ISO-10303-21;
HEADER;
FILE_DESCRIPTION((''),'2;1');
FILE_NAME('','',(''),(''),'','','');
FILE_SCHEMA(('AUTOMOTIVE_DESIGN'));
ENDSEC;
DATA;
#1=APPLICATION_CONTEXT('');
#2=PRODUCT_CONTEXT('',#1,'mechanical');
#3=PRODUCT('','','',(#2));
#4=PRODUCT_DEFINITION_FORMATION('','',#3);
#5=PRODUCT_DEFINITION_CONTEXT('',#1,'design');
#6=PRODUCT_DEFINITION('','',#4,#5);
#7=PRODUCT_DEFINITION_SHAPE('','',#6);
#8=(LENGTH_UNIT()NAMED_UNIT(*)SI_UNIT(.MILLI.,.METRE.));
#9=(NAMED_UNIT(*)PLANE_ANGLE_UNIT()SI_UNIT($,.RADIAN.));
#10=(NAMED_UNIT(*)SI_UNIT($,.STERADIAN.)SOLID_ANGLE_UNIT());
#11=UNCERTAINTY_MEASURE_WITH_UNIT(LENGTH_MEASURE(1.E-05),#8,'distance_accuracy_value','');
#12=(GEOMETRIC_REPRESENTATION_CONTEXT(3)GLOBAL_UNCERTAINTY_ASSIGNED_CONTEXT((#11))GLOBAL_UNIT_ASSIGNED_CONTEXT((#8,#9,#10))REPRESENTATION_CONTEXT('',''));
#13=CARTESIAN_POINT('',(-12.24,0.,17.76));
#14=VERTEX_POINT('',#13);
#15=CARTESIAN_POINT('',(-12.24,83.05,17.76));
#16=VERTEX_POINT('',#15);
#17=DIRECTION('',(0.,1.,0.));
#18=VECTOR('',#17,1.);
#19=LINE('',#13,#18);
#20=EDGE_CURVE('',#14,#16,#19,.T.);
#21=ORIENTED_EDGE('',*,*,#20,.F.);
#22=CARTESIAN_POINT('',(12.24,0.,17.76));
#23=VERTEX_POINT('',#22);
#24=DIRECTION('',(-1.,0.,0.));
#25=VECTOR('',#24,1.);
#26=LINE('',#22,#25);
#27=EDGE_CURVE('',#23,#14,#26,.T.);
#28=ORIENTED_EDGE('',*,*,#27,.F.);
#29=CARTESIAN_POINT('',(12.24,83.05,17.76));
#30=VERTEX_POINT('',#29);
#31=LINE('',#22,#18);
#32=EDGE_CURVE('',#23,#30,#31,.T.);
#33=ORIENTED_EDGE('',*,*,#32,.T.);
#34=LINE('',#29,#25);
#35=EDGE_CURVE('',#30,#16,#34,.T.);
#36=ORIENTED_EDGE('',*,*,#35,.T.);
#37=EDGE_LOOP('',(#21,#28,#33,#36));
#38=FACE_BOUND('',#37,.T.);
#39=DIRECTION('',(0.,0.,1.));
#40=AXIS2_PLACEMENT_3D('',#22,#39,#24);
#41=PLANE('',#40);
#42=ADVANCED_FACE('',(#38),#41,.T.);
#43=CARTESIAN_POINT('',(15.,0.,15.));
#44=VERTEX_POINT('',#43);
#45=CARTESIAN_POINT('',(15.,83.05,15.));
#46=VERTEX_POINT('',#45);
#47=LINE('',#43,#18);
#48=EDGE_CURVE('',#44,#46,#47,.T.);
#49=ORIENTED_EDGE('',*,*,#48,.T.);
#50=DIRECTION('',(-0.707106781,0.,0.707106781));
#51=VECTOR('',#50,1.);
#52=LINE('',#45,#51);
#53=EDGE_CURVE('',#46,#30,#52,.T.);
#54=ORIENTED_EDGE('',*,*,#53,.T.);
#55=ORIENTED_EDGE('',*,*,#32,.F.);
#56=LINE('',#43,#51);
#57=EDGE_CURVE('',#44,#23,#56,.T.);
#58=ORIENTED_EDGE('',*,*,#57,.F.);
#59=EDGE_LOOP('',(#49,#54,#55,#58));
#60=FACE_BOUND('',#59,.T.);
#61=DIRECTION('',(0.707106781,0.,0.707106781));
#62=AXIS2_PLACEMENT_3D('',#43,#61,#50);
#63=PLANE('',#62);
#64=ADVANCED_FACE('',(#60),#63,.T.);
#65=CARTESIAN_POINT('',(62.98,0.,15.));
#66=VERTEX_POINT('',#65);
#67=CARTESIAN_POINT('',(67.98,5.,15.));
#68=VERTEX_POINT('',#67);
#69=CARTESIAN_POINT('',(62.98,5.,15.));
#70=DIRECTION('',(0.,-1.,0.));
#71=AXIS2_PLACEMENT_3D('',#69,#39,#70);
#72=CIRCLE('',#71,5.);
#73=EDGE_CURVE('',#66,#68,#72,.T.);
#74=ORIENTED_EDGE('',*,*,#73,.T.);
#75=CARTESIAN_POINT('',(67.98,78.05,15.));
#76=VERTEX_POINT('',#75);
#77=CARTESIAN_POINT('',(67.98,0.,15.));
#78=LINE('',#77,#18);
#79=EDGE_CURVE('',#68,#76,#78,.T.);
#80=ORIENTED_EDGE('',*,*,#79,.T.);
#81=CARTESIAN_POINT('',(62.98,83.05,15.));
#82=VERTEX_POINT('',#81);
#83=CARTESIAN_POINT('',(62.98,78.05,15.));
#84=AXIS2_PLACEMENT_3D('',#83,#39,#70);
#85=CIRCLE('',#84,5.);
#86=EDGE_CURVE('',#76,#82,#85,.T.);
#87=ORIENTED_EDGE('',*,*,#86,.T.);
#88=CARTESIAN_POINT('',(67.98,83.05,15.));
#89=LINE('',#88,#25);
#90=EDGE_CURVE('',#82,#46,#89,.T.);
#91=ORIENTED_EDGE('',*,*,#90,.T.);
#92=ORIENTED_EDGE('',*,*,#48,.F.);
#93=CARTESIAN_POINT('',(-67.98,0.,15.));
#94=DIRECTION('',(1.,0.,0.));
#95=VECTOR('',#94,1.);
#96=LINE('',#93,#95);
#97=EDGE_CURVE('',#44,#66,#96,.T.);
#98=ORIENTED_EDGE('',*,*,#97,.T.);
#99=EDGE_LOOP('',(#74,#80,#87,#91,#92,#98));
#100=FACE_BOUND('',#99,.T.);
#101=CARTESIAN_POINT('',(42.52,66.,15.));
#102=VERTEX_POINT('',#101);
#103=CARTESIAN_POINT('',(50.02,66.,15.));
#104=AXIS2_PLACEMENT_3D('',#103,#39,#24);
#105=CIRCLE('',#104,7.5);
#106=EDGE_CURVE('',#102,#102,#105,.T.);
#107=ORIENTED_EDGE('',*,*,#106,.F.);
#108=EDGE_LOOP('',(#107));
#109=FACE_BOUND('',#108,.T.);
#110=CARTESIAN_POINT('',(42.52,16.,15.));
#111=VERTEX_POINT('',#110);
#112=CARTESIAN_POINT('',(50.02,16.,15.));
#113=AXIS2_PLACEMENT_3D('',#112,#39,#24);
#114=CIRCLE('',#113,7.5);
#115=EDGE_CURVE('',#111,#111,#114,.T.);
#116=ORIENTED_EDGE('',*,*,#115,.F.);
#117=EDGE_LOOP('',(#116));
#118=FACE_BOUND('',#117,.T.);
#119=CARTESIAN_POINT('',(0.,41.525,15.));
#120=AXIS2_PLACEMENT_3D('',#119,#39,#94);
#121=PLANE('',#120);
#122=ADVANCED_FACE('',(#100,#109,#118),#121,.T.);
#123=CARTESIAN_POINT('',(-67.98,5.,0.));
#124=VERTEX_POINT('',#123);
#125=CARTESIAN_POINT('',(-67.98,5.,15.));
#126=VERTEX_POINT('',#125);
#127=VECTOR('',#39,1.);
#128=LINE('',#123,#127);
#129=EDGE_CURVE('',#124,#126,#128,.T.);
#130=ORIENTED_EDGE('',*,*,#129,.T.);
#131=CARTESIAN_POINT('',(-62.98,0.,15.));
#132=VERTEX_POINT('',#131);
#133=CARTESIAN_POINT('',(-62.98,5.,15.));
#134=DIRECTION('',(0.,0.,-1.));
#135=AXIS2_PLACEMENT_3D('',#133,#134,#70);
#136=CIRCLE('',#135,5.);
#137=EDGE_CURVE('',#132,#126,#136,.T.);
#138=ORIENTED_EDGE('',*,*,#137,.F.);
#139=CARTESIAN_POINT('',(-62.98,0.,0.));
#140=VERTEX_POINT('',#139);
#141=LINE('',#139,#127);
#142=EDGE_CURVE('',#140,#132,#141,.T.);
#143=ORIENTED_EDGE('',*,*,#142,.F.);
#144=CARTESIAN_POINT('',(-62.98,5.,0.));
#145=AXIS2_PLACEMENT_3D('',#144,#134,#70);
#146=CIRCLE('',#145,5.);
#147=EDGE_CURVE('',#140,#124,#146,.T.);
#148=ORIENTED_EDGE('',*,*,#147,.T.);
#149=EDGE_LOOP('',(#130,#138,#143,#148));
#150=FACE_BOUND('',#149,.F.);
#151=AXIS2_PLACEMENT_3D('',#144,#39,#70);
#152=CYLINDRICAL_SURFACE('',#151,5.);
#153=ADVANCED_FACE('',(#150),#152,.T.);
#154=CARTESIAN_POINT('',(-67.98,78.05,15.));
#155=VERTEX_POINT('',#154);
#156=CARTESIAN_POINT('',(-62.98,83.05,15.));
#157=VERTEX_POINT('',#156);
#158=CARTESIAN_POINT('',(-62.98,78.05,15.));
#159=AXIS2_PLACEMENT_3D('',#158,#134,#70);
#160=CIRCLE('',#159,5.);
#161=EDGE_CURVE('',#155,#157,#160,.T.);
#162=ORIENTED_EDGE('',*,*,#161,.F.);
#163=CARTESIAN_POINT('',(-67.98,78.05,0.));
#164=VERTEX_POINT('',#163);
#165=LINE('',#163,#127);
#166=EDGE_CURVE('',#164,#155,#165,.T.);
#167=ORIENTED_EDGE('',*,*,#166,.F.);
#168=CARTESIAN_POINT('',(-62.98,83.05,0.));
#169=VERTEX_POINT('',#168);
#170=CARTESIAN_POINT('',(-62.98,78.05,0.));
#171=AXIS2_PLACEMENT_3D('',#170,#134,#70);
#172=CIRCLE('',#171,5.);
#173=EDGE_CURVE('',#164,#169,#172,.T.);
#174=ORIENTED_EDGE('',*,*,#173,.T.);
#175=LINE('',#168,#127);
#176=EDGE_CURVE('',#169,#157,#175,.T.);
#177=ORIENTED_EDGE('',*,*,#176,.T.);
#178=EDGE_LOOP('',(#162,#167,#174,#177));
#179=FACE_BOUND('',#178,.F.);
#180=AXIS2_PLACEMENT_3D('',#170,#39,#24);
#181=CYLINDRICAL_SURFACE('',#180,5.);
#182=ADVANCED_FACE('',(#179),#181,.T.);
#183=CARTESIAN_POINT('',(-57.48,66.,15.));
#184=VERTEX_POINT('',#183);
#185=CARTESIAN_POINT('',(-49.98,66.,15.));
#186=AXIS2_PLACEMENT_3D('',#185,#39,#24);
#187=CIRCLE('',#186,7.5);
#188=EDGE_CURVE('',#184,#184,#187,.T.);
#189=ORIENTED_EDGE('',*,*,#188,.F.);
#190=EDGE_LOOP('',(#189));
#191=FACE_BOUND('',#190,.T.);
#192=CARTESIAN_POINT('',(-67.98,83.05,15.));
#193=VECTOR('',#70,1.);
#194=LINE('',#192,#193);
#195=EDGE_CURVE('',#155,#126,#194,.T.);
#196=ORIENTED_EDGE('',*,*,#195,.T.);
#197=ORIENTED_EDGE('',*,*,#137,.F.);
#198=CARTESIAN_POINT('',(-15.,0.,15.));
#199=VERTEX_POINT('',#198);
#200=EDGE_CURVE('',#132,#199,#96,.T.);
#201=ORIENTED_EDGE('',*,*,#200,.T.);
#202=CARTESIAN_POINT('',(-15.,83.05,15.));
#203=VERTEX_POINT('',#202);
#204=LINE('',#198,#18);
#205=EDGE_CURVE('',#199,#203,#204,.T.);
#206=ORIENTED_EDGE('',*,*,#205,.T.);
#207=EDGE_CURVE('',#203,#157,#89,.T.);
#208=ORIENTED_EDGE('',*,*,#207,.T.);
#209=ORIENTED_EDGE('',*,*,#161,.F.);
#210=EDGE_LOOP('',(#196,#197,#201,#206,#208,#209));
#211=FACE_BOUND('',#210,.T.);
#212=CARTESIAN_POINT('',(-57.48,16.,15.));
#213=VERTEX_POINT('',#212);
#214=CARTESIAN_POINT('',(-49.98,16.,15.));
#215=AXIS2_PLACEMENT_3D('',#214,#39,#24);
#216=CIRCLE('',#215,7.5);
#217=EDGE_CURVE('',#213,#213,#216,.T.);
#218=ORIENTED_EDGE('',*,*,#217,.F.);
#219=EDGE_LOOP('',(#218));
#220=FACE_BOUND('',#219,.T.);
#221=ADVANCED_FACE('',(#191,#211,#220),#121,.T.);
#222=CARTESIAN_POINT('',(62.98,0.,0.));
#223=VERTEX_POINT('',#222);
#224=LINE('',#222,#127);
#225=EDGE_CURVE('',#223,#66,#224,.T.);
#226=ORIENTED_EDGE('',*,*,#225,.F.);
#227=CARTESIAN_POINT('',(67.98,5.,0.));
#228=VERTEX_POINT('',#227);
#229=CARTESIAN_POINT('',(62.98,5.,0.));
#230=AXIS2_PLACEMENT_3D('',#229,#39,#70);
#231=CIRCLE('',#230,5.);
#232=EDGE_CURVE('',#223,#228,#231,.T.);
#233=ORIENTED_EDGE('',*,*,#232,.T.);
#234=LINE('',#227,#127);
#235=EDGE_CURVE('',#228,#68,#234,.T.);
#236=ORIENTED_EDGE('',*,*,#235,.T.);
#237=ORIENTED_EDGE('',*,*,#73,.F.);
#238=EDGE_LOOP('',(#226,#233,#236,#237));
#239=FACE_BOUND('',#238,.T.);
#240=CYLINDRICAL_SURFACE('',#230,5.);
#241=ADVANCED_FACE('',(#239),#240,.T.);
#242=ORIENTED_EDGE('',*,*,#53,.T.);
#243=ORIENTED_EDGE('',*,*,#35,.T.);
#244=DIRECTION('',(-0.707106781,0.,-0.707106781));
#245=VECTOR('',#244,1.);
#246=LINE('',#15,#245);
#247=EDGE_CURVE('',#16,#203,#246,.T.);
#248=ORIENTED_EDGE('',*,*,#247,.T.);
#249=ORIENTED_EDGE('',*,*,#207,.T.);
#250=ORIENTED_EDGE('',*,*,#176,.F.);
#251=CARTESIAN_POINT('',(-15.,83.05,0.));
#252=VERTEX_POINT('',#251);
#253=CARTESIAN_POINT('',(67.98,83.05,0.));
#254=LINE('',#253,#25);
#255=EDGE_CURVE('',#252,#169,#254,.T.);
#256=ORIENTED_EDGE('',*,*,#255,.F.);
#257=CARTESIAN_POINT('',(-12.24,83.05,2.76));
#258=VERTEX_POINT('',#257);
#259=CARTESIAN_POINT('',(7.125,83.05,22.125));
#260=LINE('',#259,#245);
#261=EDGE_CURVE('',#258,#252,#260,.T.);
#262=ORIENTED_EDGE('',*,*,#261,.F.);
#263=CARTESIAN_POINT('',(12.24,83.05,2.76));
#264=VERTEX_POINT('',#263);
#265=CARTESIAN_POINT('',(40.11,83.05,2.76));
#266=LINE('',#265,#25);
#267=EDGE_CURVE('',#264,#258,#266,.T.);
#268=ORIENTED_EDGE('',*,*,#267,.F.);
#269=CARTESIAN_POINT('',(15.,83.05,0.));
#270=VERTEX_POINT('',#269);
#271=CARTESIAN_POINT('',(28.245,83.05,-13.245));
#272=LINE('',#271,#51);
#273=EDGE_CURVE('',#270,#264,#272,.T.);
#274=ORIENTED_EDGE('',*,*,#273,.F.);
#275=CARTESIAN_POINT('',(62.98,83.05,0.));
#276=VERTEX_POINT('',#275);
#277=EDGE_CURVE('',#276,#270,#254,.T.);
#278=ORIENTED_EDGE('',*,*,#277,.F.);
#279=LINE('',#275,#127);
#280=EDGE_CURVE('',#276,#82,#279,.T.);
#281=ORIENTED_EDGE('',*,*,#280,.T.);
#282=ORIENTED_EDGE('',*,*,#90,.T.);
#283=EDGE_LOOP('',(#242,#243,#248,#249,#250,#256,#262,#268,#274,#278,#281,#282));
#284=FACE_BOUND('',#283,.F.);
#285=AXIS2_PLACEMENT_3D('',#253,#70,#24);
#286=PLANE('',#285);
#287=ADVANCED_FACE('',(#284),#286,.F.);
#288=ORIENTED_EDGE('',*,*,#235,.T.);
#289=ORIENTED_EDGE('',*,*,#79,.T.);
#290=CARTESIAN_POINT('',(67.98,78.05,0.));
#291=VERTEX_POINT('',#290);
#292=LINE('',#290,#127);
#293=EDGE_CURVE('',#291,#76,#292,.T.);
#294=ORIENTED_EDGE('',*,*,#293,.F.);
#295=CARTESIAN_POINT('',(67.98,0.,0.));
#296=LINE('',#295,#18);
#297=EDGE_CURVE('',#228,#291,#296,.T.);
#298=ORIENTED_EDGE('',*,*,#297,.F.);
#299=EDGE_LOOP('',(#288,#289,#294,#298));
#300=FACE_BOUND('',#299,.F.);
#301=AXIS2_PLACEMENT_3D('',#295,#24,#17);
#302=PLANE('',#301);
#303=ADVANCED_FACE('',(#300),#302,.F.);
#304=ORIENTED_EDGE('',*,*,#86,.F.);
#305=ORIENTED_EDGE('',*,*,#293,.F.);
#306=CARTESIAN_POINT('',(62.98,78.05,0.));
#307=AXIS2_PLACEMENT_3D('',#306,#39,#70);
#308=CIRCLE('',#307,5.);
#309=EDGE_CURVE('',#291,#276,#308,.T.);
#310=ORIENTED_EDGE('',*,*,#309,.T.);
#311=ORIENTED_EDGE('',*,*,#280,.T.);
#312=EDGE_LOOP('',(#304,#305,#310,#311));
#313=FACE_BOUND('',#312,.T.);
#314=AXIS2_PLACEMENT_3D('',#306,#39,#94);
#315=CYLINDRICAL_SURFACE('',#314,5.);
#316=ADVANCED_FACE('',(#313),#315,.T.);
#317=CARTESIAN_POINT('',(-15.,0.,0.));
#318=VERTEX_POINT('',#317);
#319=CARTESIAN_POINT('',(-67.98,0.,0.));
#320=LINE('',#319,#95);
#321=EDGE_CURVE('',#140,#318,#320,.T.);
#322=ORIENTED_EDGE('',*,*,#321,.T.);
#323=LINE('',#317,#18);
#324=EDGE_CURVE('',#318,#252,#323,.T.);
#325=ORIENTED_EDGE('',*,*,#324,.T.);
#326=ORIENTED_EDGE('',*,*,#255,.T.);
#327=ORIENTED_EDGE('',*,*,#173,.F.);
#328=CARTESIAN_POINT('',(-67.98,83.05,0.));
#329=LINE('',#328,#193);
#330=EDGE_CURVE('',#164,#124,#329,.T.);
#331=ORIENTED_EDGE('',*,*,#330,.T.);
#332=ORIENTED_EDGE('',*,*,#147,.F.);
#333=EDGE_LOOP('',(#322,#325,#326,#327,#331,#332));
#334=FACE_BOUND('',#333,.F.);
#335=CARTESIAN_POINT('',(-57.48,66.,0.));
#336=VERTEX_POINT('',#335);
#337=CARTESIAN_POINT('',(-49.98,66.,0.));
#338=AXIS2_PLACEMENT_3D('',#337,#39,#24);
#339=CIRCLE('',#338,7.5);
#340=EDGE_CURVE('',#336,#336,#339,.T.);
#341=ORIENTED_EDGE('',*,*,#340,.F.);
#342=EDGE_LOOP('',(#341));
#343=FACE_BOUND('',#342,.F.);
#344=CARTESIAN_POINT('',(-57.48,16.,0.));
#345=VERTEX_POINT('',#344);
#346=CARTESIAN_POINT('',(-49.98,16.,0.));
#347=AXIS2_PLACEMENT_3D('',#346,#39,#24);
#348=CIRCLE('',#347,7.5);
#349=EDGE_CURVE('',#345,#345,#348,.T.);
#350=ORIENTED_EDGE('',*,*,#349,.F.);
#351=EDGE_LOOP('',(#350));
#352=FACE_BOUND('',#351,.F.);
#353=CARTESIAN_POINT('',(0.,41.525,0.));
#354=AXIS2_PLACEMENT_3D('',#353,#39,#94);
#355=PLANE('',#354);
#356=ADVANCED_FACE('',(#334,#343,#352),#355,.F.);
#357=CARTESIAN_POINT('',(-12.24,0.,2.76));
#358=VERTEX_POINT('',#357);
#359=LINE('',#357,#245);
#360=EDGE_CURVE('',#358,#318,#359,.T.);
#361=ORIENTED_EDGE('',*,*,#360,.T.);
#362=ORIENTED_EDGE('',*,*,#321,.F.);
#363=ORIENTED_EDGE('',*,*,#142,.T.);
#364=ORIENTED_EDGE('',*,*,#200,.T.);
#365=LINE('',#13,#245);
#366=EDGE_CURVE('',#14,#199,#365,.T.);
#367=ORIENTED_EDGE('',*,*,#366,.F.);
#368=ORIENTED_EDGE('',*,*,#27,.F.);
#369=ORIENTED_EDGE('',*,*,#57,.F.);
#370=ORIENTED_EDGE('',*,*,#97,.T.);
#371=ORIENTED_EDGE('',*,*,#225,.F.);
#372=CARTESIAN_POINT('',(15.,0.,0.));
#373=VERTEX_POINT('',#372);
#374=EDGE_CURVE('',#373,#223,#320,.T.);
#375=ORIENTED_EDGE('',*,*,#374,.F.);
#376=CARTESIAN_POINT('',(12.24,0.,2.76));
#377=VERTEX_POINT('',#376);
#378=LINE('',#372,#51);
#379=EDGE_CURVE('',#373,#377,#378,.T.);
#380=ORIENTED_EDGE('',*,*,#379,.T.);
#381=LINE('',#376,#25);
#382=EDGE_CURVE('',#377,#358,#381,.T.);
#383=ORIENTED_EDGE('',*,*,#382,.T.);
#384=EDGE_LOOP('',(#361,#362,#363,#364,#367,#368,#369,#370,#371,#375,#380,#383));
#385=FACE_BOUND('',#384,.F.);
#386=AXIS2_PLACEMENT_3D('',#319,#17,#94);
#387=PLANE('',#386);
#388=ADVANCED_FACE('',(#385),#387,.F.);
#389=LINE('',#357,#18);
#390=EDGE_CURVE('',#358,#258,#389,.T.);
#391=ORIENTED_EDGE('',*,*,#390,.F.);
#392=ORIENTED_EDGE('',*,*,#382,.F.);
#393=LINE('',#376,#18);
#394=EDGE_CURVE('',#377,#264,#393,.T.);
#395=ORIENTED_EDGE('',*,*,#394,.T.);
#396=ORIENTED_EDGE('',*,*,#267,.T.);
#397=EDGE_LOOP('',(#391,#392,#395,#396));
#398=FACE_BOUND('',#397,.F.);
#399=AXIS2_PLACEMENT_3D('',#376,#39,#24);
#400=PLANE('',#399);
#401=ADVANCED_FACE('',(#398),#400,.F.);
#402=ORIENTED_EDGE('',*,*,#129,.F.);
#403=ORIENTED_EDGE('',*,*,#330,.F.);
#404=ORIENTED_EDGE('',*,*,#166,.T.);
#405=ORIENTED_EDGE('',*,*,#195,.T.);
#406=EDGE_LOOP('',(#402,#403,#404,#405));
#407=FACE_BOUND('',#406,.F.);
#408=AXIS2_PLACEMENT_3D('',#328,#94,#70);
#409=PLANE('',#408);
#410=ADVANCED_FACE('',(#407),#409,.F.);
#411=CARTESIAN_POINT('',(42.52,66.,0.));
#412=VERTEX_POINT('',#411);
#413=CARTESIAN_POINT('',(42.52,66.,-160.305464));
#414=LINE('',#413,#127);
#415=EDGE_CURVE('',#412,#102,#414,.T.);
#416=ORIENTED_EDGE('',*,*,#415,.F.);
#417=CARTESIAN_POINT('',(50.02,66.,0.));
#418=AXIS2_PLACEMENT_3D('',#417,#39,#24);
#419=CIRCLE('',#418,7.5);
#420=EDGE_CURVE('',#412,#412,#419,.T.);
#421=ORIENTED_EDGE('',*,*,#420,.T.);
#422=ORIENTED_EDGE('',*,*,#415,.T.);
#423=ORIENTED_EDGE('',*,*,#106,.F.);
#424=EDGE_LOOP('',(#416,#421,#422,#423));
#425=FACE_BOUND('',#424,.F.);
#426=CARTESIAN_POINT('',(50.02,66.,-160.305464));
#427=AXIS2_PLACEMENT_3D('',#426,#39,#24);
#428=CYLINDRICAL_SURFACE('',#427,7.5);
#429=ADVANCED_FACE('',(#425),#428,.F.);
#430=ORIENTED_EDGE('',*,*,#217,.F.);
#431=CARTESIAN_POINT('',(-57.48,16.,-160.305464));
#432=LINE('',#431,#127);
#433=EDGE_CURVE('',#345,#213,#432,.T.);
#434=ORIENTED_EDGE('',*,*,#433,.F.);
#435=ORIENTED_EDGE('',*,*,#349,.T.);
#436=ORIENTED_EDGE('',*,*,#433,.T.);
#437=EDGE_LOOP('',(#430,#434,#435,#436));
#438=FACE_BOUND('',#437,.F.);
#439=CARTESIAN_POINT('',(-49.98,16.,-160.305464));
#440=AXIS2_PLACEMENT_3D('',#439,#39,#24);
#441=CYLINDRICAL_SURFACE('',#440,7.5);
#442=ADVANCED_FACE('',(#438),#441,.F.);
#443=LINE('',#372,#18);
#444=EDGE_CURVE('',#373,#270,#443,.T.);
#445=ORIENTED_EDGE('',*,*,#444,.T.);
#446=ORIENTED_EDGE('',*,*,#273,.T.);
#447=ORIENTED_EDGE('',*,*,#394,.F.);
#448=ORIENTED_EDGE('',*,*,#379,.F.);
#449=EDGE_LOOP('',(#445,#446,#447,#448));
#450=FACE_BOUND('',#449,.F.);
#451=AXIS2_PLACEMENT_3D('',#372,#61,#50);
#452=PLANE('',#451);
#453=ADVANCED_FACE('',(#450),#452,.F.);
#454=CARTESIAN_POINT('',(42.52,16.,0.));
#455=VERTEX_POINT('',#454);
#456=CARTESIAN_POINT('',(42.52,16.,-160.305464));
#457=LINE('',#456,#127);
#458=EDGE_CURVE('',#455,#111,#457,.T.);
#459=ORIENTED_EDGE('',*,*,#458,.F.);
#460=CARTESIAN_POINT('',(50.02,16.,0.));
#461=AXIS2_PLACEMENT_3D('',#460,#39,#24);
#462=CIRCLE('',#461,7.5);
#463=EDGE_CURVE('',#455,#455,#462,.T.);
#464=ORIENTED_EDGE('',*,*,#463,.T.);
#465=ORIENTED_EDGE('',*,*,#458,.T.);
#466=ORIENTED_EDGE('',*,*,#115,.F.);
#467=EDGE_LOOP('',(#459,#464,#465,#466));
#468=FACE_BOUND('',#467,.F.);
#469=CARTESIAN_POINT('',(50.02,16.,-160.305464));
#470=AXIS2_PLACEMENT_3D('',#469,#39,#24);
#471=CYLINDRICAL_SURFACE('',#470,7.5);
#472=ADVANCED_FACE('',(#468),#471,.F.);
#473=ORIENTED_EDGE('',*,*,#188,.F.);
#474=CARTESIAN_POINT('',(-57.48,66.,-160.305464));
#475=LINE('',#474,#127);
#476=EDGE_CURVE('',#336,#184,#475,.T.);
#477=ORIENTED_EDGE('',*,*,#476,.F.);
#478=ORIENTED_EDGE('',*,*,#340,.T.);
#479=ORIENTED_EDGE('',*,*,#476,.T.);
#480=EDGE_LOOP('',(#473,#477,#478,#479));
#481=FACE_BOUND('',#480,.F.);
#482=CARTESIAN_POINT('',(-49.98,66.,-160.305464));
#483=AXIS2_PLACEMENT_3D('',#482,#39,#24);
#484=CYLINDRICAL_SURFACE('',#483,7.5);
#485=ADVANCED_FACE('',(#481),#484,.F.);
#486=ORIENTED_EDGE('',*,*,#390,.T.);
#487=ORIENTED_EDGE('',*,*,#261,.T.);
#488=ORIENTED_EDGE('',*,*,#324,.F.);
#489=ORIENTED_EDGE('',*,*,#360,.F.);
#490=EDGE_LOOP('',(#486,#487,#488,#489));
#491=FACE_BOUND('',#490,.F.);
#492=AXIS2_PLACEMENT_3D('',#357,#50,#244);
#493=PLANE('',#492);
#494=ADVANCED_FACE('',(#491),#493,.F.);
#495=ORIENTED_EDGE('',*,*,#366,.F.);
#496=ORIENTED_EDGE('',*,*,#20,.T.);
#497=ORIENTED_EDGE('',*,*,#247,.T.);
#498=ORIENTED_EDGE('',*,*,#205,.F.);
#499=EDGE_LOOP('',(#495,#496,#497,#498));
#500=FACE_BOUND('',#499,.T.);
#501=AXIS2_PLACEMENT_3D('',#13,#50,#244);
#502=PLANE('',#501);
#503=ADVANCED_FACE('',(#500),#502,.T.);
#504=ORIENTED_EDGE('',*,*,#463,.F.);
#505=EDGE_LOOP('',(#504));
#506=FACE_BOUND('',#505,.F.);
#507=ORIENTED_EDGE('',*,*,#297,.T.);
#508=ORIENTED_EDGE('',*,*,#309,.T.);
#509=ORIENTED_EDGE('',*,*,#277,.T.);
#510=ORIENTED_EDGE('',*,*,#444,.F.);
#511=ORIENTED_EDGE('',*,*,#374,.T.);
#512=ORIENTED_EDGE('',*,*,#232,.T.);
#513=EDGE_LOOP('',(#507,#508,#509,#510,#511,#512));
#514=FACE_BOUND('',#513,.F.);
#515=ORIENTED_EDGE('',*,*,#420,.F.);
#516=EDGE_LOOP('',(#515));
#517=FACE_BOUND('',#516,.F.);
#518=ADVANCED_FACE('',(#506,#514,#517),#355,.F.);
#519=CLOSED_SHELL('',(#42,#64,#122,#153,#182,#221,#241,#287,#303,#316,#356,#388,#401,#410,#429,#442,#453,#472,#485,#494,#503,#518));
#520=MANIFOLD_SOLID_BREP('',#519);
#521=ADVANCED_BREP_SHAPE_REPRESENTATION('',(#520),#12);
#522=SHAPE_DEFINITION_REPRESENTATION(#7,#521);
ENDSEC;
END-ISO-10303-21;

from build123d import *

# Parameters (mm, degrees)
F1_DEPTH = 15
F4_DEPTH = 83.051
F7_DEPTH = 83.05
F8_R     = 5
F10_D    = 15


with BuildPart() as f1:
    # F0 (on Top) → F1 (new body)
    with BuildSketch(Plane.XY):
        Polygon((-67.98, 0), (0, 0), (67.98, 0), (67.98, 83.05), (-67.98, 83.05), align=None)
    extrude(amount=F1_DEPTH)

    # F3 (on offset) → F4 (cut, through all)
    with BuildSketch(Plane.XZ):
        Polygon((-15, 0), (0, 0), (15, 0), (12.24, 2.76), (-12.24, 2.76), align=None)
    extrude(amount=-F4_DEPTH, mode=Mode.SUBTRACT)

    # F6 (on offset) → F7 (join)
    with BuildSketch(Plane.XZ):
        Polygon((-15, 15), (0, 15), (15, 15), (12.24, 17.76), (-12.24, 17.76), align=None)
    extrude(amount=-F7_DEPTH)

    # F8
    f8_edges = [f1.edges().sort_by_distance(p)[0] for p in [
        (-67.98, 0, 7.5),
        (67.98, 0, 7.5),
        (67.98, 83.05, 7.5),
        (-67.98, 83.05, 7.5),
    ]]
    fillet(f8_edges, radius=F8_R)

    # F10 (through all)
    with Locations(Plane(origin=(0, 0, 0), x_dir=(1, 0, 0), z_dir=(0, 0, -1))):
        with Locations((-49.98, -66), (-49.98, -16), (50.02, -66), (50.02, -16)):
            Hole(F10_D / 2)


solid = f1.part
